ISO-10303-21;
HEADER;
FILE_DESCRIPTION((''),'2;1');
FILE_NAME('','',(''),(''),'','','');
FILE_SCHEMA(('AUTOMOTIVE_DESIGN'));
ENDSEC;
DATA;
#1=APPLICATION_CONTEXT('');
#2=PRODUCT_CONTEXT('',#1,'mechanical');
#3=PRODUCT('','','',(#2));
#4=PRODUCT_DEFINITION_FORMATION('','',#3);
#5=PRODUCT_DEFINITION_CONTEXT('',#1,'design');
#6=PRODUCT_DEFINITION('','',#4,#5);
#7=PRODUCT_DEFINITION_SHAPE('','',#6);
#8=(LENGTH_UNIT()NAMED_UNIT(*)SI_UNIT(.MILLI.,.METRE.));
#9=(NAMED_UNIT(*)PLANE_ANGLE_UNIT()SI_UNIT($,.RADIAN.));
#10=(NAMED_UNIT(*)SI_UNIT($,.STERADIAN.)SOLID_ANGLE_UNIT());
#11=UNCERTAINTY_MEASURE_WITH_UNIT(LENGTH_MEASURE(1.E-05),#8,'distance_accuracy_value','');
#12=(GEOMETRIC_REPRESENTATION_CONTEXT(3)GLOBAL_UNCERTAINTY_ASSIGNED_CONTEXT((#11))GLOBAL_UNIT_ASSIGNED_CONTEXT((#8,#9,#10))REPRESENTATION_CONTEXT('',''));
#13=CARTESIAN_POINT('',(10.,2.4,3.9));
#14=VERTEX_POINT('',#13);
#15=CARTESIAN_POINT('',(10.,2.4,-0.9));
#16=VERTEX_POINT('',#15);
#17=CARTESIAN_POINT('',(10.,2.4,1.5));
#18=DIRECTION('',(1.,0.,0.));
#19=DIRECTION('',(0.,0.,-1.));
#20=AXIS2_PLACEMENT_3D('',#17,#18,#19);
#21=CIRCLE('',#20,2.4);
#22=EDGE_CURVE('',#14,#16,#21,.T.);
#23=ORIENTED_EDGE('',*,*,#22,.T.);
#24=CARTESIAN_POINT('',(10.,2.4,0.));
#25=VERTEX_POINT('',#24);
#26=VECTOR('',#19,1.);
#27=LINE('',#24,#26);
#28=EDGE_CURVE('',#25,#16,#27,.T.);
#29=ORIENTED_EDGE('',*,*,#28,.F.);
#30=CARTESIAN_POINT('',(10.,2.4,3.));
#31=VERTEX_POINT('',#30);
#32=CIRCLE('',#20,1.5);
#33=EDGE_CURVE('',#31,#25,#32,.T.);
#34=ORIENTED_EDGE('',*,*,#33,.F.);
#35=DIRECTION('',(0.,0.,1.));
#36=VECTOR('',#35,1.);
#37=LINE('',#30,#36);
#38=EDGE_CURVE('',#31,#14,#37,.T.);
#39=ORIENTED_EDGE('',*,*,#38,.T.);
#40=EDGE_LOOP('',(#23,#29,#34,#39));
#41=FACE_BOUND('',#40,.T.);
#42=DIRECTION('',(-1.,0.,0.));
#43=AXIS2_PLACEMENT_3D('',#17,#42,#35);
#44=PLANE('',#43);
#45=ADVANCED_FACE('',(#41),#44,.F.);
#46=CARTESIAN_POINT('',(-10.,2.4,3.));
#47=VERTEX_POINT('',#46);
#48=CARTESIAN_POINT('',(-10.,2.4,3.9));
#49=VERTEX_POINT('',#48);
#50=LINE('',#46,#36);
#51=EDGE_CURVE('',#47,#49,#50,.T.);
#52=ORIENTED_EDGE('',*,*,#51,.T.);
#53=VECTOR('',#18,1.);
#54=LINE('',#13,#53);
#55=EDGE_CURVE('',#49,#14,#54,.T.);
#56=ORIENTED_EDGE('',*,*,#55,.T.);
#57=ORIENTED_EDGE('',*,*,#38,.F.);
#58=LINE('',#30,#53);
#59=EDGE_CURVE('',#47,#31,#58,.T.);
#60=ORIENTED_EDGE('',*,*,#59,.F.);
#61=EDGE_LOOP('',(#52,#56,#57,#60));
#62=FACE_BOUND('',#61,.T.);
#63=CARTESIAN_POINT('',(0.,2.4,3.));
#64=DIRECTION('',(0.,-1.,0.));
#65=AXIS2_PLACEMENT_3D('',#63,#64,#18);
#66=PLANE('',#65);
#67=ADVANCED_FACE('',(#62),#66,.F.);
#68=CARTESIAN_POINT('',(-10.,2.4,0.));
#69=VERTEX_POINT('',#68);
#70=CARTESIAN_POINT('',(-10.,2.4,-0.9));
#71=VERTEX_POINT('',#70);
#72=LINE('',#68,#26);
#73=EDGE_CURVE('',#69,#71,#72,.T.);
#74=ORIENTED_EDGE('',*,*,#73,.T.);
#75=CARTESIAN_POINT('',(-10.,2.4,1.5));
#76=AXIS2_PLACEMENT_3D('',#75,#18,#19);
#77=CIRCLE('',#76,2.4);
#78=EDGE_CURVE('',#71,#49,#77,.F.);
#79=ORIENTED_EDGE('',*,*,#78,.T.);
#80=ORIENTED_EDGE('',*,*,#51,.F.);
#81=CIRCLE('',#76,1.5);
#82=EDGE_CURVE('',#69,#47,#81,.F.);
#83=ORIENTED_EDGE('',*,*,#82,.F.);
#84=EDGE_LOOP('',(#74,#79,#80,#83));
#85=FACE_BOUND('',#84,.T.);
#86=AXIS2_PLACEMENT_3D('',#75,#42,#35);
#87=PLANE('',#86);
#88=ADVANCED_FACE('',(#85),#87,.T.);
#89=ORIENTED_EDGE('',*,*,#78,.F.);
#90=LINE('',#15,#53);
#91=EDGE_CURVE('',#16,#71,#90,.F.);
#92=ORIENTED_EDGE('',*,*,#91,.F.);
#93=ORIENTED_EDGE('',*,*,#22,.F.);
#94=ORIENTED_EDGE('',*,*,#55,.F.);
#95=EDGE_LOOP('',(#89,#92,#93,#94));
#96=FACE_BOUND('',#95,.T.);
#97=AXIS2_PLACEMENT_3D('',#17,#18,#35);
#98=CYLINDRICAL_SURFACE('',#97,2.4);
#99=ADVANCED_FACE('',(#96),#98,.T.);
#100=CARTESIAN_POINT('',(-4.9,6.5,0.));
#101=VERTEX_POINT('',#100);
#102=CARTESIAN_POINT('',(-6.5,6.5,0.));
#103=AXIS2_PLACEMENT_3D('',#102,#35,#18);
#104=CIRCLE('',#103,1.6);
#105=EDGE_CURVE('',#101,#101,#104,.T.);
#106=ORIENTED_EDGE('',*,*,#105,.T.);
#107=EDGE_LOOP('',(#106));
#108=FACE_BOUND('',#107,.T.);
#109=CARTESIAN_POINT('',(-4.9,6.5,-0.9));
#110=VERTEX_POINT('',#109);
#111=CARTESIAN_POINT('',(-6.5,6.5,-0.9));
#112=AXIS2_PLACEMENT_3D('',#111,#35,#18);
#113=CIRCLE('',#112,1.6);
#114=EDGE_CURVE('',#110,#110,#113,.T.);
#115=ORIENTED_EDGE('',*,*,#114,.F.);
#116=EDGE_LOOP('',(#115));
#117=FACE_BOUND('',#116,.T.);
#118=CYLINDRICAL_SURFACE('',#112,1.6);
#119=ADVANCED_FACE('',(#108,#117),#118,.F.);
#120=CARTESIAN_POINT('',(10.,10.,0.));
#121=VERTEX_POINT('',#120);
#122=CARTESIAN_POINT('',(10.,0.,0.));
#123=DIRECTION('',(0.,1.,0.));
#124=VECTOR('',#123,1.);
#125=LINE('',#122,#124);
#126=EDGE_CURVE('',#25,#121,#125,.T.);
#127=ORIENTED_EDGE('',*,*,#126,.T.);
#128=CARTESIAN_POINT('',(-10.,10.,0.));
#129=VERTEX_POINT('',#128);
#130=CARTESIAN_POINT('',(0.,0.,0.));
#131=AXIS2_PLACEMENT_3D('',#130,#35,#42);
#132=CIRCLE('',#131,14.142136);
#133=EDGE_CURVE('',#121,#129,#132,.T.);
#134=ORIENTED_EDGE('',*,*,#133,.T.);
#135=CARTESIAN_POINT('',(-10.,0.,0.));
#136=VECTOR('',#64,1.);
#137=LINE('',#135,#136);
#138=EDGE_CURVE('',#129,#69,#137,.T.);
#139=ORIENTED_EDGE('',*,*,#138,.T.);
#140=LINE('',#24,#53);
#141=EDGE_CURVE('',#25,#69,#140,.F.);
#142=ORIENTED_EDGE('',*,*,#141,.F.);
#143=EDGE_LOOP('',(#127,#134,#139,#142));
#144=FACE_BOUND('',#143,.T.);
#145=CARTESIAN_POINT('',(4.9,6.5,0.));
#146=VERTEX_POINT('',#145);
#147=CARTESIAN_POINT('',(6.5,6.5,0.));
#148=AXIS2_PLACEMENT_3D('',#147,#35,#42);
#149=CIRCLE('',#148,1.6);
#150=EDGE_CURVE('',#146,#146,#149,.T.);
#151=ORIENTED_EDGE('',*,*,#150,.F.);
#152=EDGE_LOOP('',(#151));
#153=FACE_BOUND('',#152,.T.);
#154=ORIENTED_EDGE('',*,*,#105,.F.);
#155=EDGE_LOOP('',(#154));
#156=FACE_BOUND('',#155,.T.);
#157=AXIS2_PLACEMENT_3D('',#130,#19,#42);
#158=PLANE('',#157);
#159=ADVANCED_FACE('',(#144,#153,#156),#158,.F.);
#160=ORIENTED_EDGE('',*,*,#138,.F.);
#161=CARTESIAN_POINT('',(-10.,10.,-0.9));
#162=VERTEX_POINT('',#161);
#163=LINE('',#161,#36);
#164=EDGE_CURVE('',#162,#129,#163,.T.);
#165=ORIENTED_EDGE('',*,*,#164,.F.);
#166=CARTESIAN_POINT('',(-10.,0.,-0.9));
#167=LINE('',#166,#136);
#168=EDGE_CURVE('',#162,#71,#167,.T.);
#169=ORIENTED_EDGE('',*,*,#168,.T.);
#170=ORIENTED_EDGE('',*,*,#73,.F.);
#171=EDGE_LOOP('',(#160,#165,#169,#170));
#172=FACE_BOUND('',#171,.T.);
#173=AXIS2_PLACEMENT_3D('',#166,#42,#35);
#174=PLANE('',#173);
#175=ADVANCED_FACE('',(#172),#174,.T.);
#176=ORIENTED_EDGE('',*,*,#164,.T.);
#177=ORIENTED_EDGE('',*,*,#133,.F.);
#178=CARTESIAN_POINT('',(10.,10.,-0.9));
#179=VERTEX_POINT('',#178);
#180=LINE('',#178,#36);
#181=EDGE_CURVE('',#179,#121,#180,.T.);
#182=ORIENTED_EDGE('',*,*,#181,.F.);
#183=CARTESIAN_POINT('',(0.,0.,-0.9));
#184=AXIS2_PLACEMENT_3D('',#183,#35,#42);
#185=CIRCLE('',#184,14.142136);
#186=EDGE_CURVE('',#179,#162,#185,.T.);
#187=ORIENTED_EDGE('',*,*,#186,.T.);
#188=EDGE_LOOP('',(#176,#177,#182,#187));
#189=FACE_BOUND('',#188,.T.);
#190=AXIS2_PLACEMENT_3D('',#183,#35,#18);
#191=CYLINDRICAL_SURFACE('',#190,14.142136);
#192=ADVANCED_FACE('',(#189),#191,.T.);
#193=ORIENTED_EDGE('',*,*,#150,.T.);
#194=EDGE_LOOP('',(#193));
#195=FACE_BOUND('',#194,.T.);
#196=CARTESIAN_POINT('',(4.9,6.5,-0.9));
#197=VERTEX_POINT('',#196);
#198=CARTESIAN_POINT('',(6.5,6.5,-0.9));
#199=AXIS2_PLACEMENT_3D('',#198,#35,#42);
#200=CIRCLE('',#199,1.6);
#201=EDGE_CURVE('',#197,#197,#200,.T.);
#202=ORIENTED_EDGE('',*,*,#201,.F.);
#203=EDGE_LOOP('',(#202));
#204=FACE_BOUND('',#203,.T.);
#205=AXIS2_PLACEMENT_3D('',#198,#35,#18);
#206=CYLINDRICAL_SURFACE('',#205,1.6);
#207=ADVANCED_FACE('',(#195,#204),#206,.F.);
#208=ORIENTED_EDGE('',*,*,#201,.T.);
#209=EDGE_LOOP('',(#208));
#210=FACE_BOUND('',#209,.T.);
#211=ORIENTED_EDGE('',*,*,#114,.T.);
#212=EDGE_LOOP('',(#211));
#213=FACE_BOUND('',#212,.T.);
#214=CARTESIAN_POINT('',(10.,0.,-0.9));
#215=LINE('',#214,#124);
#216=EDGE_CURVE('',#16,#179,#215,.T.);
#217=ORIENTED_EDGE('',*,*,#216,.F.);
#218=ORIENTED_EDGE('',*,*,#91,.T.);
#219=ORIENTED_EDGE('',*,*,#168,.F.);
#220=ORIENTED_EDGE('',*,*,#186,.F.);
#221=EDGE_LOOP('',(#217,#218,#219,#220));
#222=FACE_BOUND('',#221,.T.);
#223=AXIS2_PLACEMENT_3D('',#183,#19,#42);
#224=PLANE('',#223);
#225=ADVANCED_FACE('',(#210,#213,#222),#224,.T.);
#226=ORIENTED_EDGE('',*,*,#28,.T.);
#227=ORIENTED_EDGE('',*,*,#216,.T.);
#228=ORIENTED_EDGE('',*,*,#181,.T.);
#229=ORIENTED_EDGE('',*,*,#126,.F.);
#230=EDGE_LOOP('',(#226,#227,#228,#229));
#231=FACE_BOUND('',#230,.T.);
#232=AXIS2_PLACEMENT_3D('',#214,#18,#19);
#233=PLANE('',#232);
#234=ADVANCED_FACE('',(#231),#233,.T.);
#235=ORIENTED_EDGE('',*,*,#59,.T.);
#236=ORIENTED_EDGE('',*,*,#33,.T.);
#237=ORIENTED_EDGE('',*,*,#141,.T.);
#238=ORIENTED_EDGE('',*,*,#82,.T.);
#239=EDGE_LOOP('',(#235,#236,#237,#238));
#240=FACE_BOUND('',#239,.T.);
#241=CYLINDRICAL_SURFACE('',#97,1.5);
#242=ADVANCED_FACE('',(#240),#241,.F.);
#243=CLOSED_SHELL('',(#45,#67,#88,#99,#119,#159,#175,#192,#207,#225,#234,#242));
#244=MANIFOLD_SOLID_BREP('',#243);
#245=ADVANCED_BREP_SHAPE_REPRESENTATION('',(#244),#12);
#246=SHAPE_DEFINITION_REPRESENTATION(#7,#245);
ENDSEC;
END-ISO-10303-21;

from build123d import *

# Parameters (mm, degrees)
SKETCH_1_R             = 1.6
SM_BASE_FLANGE_1_DEPTH = 0.9
OTHER_START            = -10
OTHER_1_DEPTH          = 20
OTHER_1_2_DEPTH        = 20


# Read off the part's stored shape, not the designer's step: 褶边1
# Sheet-metal steps are written as plain solids
with BuildPart() as part:
    # Sketch 1 → 基体-法兰1 (new body)
    with BuildSketch(Plane.XY):
        with BuildLine():
            Line((10, 0), (-10, 0))
            Line((-10, 0), (-10, 10))
            ThreePointArc((-10, 10), (0, 14.142135624), (10, 10))
            Line((10, 10), (10, 0))
        make_face()
        with Locations((-6.5, 6.5)):
            Circle(SKETCH_1_R, mode=Mode.SUBTRACT)
        with Locations(Location((6.5, 6.5, 0), (0, 0, 180))):
            Circle(SKETCH_1_R, mode=Mode.SUBTRACT)
    extrude(amount=-SM_BASE_FLANGE_1_DEPTH)

    # Other 1 outline → Other 1 (cut)
    with BuildSketch(Plane.YZ.offset(OTHER_START)):
        with BuildLine():
            ThreePointArc((2.4, -0.9), (1.360769515, -0.663330765), (0.5265006, 0))
            Line((0.5265006, 0), (0, 0))
            Line((0, 0), (0, -0.9))
            Line((0, -0.9), (2.4, -0.9))
        make_face()
    extrude(amount=OTHER_1_DEPTH, mode=Mode.SUBTRACT)

    # Other 1 2 outline → Other 1 2 (add)
    with BuildSketch(Plane.YZ.offset(OTHER_START)):
        with BuildLine():
            Line((2.4, 3), (2.4, 3.9))
            ThreePointArc((2.4, 3.9), (0.236669235, 2.539230485), (0.5265006, 0))
            Line((0.5265006, 0), (2.4, 0))
            ThreePointArc((2.4, 0), (0.9, 1.5), (2.4, 3))
        make_face()
    extrude(amount=OTHER_1_2_DEPTH)


solid = part.part
